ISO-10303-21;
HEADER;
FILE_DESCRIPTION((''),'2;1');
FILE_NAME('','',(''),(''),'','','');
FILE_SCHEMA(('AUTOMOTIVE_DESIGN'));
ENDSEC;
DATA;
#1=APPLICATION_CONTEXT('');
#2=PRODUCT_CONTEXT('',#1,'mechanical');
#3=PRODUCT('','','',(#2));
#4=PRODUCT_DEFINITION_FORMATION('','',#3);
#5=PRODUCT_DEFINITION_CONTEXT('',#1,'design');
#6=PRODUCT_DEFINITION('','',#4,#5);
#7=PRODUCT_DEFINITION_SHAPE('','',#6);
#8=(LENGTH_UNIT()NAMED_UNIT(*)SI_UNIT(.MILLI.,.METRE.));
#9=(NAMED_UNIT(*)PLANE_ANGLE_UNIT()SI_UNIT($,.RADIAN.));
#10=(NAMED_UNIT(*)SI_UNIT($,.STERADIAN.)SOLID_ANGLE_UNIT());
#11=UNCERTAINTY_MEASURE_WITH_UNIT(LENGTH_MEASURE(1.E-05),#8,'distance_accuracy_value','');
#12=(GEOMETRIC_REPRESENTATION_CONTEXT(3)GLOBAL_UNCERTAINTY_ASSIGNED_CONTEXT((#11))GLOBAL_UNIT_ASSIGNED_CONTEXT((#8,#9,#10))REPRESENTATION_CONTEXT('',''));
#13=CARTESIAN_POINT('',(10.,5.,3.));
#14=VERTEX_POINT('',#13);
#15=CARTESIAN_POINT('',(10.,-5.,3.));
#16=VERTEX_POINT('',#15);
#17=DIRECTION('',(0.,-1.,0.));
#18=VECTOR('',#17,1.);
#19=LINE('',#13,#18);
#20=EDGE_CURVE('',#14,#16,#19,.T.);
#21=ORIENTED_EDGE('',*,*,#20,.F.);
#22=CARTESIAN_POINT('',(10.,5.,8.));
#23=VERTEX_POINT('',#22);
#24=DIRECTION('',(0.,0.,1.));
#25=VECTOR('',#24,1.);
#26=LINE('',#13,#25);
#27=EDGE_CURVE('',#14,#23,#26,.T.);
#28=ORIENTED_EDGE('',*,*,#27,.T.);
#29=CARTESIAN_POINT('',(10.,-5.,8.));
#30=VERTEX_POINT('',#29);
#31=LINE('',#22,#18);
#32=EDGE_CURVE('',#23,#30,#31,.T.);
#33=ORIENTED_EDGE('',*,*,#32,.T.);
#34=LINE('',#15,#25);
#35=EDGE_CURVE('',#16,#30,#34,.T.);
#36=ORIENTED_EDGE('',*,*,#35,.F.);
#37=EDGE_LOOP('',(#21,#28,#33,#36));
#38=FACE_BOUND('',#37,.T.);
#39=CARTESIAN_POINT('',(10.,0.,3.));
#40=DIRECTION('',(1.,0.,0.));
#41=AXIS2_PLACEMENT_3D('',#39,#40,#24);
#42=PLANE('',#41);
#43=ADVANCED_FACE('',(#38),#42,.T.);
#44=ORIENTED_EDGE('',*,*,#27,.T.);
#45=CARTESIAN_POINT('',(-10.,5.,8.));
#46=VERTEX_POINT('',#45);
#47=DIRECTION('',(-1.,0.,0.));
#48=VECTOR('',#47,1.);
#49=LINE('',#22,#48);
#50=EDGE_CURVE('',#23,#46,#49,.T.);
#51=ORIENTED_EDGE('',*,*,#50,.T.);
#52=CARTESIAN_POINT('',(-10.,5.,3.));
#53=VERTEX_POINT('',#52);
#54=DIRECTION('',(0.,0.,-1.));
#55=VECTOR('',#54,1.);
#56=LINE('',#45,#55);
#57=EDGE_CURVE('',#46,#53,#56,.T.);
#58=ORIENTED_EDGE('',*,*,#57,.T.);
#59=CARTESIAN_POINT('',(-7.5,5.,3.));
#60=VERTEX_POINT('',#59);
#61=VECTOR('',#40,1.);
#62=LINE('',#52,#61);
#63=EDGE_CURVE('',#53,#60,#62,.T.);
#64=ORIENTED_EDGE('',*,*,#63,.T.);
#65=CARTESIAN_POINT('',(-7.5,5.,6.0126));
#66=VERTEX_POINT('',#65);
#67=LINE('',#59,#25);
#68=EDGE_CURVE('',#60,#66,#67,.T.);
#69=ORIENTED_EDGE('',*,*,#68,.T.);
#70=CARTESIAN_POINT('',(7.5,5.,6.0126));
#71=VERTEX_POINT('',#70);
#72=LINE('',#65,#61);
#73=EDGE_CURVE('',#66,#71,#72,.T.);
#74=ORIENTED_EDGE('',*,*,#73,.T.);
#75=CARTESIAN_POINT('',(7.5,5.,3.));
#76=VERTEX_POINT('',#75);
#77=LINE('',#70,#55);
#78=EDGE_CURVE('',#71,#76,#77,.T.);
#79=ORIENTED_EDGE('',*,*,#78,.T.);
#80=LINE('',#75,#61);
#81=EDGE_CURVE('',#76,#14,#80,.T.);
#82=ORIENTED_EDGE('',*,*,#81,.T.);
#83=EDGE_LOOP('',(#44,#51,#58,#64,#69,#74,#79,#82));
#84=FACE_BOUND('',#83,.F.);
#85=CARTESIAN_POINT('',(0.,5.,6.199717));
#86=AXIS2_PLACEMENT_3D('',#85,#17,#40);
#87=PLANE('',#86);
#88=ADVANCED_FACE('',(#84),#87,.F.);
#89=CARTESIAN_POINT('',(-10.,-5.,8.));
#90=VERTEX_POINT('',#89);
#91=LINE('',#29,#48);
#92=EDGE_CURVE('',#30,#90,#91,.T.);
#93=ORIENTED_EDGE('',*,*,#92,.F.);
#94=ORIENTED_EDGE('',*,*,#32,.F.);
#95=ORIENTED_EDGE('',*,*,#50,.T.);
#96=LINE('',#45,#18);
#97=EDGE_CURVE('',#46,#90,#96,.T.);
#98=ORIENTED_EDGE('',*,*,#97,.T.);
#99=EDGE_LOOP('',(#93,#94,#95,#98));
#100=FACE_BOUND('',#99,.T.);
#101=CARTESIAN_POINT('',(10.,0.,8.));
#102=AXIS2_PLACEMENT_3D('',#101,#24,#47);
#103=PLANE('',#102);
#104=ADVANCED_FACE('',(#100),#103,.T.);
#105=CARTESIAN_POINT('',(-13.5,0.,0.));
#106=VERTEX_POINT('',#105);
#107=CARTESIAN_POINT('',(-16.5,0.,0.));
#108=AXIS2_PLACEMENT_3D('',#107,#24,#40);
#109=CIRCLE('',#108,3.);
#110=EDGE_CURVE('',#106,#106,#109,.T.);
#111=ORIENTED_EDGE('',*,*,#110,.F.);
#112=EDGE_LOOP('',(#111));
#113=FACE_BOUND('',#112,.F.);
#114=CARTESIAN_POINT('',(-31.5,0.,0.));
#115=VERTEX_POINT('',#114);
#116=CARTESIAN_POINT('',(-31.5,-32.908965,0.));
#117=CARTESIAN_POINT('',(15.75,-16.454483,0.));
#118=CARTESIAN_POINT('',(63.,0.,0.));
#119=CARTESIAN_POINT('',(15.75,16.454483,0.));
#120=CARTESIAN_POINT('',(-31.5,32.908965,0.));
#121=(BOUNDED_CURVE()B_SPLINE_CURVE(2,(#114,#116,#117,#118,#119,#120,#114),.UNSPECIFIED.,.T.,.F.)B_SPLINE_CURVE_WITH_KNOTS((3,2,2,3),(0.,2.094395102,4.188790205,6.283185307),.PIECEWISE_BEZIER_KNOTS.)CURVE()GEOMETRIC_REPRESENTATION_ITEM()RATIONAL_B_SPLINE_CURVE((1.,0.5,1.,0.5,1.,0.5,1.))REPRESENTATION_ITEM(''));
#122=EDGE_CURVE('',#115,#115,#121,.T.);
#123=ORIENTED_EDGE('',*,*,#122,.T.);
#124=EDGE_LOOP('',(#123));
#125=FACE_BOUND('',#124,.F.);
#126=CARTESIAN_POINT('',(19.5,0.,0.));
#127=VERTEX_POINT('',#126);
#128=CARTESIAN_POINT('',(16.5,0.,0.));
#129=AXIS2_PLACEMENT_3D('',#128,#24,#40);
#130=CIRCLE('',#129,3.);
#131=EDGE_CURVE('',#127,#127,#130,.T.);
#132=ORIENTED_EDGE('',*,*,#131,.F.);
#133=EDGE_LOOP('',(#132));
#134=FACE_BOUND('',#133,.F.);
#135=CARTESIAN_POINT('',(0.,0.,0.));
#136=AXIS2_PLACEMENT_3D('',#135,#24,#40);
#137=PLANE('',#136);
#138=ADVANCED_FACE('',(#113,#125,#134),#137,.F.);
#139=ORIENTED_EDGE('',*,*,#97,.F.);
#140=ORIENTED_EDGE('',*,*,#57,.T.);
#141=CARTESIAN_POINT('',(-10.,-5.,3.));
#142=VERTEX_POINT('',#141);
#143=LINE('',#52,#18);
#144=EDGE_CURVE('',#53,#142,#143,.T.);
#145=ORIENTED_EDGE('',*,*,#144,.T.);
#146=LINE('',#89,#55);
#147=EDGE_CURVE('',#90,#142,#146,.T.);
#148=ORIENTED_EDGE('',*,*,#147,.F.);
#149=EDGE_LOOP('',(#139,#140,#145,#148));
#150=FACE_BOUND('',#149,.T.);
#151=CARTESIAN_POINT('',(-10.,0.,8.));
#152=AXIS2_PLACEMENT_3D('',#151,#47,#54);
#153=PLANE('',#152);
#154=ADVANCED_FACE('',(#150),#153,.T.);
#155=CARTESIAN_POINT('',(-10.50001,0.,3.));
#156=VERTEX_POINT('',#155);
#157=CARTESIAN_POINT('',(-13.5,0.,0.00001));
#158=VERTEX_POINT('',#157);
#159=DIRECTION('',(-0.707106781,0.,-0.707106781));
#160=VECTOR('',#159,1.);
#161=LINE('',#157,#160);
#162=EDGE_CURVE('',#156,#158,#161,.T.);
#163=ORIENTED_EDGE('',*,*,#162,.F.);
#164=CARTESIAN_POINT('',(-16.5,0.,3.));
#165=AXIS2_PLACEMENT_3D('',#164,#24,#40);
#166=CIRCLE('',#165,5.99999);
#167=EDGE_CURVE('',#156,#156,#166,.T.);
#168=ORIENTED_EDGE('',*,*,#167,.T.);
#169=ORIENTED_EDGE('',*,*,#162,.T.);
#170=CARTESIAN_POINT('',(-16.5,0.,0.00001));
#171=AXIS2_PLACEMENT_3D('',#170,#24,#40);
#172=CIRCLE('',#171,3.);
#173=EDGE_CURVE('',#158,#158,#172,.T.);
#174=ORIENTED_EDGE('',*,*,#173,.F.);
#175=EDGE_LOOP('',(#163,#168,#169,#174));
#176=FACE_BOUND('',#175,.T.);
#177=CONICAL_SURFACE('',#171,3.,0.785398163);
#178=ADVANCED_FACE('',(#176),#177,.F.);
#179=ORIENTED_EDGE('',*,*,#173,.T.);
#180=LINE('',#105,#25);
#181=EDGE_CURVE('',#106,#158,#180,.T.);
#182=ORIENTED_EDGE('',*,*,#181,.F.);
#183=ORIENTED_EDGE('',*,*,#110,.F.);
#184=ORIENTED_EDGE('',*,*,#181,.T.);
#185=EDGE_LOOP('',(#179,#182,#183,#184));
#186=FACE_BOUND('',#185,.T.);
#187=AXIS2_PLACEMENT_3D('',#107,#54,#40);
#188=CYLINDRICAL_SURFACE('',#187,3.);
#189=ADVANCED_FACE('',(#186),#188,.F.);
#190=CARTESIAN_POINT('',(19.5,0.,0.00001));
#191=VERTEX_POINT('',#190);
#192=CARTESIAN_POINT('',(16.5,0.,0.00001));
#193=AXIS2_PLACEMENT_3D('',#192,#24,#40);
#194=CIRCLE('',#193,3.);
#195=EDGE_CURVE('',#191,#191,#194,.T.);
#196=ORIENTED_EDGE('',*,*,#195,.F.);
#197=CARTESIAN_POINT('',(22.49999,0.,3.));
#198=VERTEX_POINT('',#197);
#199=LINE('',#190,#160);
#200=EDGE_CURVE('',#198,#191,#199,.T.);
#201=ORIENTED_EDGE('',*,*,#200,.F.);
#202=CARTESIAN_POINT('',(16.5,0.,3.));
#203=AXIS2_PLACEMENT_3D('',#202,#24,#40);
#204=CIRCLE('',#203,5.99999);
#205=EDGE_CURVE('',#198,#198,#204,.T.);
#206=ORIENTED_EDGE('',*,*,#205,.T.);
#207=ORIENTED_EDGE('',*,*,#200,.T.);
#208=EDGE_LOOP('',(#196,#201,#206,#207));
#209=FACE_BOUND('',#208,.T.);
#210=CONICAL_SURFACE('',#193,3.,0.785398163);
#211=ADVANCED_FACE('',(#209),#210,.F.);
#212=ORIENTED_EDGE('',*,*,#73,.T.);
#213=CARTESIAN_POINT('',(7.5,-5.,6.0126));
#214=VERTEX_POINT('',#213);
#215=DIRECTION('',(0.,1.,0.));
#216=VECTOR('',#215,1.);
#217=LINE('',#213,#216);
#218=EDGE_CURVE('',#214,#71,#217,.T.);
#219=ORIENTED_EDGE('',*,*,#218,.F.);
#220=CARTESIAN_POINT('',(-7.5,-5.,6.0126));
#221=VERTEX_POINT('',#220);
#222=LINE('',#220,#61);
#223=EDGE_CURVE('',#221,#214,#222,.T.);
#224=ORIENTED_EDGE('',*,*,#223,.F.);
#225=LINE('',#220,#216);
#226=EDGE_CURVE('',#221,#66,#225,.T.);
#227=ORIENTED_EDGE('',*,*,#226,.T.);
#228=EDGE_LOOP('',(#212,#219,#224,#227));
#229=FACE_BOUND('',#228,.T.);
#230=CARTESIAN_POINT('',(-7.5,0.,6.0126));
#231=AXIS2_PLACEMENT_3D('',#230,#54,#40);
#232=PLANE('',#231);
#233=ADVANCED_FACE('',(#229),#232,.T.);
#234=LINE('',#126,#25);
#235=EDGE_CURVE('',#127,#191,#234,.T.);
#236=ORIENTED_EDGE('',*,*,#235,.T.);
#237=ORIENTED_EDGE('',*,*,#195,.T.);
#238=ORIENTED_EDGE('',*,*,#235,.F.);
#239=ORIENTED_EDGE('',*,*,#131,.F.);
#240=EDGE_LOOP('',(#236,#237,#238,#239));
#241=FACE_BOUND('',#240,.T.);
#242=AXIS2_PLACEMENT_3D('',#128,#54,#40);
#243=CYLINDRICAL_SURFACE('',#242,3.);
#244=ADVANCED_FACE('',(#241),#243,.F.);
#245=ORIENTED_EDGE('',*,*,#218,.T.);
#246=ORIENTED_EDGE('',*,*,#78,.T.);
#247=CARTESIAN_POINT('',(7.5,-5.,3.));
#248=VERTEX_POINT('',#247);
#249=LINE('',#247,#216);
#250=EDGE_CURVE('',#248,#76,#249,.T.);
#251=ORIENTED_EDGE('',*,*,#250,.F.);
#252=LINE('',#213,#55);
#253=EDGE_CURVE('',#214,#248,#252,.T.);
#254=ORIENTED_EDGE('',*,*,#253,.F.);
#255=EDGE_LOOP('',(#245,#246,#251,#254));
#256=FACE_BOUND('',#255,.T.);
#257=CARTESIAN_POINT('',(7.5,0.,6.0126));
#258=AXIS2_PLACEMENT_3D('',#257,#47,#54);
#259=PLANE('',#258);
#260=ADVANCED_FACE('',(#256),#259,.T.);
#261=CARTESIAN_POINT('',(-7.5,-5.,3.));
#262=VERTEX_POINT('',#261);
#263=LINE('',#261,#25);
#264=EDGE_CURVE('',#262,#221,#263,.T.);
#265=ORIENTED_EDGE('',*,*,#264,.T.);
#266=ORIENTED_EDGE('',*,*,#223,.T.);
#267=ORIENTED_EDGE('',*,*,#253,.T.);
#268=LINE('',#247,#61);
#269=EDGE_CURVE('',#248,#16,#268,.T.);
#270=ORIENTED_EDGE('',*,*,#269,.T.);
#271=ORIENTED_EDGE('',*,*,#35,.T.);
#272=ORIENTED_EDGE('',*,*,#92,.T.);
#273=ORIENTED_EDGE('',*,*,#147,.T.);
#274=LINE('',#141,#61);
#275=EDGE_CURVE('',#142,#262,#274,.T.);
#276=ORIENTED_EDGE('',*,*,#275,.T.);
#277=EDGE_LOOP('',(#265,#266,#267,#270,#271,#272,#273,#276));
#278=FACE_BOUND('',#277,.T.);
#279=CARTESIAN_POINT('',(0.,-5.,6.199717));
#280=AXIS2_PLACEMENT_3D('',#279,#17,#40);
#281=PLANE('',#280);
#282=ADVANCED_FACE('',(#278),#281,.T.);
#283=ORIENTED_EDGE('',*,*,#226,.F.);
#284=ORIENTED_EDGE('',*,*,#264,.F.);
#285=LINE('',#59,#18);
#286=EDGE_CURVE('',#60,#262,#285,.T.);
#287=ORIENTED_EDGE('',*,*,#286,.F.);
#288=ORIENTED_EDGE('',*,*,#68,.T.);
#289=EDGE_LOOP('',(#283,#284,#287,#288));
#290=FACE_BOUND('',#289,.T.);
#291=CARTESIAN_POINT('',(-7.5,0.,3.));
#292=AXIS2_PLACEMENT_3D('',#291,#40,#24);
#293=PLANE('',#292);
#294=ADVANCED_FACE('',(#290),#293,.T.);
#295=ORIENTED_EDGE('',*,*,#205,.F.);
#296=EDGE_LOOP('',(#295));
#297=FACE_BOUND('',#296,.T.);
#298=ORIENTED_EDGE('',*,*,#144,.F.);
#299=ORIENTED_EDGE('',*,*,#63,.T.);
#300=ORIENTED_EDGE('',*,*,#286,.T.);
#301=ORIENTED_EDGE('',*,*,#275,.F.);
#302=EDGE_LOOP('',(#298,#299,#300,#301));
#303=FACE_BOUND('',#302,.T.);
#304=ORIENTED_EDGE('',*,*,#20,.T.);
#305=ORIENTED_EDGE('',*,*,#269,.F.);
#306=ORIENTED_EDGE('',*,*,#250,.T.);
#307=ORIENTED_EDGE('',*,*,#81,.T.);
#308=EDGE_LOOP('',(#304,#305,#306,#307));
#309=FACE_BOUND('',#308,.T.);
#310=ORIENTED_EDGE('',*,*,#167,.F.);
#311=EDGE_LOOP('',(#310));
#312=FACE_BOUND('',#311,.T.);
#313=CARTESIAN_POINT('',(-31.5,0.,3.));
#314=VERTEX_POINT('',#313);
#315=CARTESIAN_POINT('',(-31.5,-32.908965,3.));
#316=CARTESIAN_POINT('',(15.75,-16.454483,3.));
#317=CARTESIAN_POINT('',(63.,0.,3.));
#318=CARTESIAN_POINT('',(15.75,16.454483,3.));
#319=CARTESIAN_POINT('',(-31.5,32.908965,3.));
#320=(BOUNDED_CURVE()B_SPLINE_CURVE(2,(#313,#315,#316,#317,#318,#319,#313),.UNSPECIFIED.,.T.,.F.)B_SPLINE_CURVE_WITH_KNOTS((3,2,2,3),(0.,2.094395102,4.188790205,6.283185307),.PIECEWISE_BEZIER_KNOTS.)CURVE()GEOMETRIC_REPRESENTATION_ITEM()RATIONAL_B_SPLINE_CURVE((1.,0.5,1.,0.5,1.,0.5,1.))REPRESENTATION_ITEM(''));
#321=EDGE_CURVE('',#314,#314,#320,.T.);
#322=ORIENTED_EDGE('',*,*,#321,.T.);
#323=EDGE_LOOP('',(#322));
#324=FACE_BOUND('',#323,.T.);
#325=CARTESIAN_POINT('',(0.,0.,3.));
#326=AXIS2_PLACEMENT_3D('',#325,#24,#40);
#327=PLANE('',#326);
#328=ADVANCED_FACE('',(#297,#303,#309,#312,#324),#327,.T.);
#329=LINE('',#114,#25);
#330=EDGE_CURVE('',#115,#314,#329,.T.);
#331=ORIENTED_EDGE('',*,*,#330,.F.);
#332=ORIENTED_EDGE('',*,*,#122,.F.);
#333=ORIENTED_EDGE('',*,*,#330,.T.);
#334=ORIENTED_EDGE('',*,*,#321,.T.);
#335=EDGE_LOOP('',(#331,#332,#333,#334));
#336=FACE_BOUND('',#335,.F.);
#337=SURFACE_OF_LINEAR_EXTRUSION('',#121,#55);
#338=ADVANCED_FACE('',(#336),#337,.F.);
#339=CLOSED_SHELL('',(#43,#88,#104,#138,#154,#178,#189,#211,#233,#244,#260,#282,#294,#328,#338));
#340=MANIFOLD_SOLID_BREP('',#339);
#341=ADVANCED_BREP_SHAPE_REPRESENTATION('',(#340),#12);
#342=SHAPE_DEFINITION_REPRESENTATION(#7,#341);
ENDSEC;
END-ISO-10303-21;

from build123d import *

# Parameters (mm, degrees)
F0_R     = 3
F1_DEPTH = 3
F3_DEPTH = 5
F4_SIZE  = 2.99999


# Not quite as in the source:
# - a fillet or chamfer is up to 0.001 mm smaller than in the source, because OpenCascade refuses the exact size


with BuildPart() as f1:
    # F0 (on Top) → F1 (new body)
    with BuildSketch(Plane.XY):
        with BuildLine():
            add(Edge.make_bspline(
                [(-31.5, 0), (-31.5, -32.9089653438), (15.75, -16.4544826719), (63, 0), (15.75, 16.4544826719), (-31.5, 32.9089653438), (-31.5, 0)],
                knots=[0, 0, 0, 2.0943951024, 2.0943951024, 4.1887902048, 4.1887902048, 6.2831853072, 6.2831853072, 6.2831853072], degree=2, weights=[1, 0.5, 1, 0.5, 1, 0.5, 1]))
        make_face()
        with Locations((-16.5, 0)):
            Circle(F0_R, mode=Mode.SUBTRACT)
        with Locations((16.5, 0)):
            Circle(F0_R, mode=Mode.SUBTRACT)
    extrude(amount=F1_DEPTH)

    # F2 (on Front) → F3 (join, symmetric)
    with BuildSketch(Plane.XZ):
        Polygon((7.5, 3), (10, 3), (10, 8), (-10, 8), (-10, 3), (-7.5, 3), (-7.5, 6.0126003809), (7.5, 6.0126003809), align=None)
    extrude(amount=F3_DEPTH, both=True)

    # F4 (size 3 in the source; OpenCascade refuses exactly that, so slightly less here)
    f4_edges = [f1.edges().sort_by_distance(p)[0] for p in [
        (-19.5, 0, 3),
        (13.5, 0, 3),
    ]]
    chamfer(f4_edges, length=F4_SIZE)


solid = f1.part
